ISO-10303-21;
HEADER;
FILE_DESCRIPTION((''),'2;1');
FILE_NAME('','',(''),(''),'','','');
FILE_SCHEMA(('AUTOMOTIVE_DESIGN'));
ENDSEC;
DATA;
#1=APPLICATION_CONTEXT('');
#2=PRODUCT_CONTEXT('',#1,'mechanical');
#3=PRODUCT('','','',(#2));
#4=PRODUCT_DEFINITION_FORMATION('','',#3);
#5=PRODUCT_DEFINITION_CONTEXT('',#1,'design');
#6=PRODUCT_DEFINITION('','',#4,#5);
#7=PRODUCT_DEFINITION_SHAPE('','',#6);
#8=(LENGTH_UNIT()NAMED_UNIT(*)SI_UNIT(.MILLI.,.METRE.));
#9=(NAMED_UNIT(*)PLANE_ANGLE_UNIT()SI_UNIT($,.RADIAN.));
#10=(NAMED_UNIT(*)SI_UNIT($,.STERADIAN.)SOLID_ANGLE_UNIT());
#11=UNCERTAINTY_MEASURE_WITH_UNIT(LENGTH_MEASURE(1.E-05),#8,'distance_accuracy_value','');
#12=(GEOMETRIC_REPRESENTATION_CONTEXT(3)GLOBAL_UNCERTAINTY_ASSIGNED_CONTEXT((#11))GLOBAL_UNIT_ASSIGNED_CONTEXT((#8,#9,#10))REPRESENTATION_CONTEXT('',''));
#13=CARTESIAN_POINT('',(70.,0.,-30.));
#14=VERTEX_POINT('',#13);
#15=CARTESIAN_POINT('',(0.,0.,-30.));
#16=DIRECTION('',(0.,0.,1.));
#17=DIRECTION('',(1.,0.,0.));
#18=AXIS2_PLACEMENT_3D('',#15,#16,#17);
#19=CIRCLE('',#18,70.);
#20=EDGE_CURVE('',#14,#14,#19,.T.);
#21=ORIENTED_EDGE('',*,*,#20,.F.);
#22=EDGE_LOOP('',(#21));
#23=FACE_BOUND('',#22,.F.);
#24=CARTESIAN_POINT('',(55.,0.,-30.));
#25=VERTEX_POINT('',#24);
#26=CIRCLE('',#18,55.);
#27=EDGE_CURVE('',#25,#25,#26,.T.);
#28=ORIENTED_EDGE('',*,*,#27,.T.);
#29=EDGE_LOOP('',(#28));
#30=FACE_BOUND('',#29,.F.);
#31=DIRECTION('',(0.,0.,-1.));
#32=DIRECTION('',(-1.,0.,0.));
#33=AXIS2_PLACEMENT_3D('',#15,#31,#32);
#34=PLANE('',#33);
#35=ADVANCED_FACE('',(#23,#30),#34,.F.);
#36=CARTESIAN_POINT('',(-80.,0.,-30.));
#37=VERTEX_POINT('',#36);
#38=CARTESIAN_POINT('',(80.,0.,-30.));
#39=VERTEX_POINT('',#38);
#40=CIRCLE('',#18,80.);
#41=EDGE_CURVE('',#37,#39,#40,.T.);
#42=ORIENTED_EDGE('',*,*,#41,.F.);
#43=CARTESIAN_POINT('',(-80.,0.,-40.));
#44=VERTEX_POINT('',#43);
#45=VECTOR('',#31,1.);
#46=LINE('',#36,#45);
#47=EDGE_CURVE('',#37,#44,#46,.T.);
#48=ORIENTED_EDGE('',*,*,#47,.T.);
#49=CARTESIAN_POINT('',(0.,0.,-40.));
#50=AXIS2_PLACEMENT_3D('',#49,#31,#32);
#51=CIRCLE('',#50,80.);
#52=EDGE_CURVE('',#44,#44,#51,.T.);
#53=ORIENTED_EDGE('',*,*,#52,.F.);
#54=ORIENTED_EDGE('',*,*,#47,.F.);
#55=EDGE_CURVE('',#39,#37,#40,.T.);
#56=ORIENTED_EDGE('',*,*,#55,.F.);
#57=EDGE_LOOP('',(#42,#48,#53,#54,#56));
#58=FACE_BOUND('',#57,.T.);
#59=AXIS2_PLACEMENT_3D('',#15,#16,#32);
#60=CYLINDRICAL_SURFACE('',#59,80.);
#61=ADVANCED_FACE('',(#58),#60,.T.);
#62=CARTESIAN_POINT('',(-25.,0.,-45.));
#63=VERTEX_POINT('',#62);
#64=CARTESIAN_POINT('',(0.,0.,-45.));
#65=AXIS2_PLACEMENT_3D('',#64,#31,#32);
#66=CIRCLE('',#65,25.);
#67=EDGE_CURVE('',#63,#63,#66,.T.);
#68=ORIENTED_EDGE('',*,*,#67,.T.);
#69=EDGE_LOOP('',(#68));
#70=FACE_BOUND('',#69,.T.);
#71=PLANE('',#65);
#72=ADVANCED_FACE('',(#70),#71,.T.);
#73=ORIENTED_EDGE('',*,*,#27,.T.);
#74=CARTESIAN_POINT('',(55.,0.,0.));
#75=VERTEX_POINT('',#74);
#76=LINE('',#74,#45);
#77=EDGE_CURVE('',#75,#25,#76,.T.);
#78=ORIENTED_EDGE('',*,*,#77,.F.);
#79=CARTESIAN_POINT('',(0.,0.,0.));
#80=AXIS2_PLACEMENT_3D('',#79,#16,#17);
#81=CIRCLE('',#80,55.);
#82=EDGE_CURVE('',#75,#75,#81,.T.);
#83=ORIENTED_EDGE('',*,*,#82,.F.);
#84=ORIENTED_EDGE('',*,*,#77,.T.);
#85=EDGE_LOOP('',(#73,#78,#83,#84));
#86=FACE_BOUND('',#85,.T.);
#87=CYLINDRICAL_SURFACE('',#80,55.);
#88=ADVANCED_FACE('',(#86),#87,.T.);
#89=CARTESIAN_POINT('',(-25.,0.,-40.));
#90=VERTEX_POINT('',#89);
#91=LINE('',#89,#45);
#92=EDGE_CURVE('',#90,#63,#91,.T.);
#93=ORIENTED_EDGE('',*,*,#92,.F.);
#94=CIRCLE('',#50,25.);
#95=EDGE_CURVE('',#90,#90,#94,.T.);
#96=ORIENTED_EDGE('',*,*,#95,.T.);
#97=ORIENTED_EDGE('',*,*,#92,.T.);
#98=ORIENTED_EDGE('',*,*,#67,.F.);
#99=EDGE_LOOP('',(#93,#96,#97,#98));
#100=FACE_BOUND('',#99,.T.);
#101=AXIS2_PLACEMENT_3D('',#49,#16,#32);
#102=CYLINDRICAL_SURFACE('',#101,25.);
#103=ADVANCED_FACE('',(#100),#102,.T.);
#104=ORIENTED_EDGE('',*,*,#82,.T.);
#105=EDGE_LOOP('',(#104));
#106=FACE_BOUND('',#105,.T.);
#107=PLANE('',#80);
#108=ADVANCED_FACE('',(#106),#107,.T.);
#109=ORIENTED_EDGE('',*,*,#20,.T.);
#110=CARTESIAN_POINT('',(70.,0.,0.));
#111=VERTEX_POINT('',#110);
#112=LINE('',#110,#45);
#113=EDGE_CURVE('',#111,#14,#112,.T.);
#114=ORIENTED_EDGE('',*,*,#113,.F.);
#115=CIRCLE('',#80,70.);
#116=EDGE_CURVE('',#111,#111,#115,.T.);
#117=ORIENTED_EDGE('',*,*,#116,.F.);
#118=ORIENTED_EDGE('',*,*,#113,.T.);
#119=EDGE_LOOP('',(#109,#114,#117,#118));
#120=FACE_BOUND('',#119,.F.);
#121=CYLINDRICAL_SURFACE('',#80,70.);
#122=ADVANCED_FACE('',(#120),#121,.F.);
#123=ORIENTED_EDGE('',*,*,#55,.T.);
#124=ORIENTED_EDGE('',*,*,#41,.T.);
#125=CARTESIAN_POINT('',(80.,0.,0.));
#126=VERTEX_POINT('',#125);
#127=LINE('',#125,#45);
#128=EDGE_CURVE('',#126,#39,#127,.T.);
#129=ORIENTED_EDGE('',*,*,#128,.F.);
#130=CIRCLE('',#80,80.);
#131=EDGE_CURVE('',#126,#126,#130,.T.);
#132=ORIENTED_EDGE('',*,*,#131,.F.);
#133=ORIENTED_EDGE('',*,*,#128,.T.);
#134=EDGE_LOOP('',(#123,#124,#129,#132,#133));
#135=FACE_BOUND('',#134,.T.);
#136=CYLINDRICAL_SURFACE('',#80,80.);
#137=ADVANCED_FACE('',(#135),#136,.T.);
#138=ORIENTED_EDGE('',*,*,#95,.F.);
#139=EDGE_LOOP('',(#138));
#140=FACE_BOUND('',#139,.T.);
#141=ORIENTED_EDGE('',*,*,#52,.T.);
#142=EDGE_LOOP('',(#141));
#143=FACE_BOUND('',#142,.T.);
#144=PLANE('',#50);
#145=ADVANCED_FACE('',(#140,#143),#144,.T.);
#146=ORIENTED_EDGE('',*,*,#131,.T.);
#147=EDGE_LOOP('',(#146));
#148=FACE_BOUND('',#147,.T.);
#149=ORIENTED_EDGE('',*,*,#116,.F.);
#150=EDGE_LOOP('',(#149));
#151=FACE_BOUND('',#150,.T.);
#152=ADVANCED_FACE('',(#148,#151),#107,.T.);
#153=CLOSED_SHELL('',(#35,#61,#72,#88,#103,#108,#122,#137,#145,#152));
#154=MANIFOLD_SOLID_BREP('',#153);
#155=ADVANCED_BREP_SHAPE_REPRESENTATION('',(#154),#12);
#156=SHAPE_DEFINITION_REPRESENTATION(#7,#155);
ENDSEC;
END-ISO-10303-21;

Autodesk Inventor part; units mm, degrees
ref_plane "YZ Plane" through (0, 0, 0) normal (1, 0, 0) x (0, 1, 0)
ref_plane "XZ Plane" through (0, 0, 0) normal (0, 1, 0) x (-1, 0, 0)
ref_plane "XY Plane" through (0, 0, 0) normal (0, 0, 1) x (1, 0, 0)
sketch "草圖1" plane through (0, 0, 0) normal (0, 0, 1) x (1, 0, 0)
  circle A0 centre (0, 0) radius 80
  circle A1 centre (0, 0) radius 70
  circle A2 centre (0, 0) radius 55
  dimension "d0" = 160
  dimension "d1" = 140
  dimension "d2" = 110
extrude "擠出1" add sketch "草圖1" against normal blind 30
sketch "草圖2" plane through (0, 0, -30) normal (0, 0, -1) x (-1, 0, 0)
  circle A0 centre (0, 0) radius 80 projected
extrude "擠出2" add sketch "草圖2" along normal blind 10
sketch "草圖3" plane through (0, 0, -40) normal (0, 0, -1) x (-1, 0, 0)
  circle A0 centre (0, 0) radius 25
  dimension "d7" = 50
extrude "擠出3" add sketch "草圖3" along normal blind 5
properties part number "螺旋鉤子底座"
